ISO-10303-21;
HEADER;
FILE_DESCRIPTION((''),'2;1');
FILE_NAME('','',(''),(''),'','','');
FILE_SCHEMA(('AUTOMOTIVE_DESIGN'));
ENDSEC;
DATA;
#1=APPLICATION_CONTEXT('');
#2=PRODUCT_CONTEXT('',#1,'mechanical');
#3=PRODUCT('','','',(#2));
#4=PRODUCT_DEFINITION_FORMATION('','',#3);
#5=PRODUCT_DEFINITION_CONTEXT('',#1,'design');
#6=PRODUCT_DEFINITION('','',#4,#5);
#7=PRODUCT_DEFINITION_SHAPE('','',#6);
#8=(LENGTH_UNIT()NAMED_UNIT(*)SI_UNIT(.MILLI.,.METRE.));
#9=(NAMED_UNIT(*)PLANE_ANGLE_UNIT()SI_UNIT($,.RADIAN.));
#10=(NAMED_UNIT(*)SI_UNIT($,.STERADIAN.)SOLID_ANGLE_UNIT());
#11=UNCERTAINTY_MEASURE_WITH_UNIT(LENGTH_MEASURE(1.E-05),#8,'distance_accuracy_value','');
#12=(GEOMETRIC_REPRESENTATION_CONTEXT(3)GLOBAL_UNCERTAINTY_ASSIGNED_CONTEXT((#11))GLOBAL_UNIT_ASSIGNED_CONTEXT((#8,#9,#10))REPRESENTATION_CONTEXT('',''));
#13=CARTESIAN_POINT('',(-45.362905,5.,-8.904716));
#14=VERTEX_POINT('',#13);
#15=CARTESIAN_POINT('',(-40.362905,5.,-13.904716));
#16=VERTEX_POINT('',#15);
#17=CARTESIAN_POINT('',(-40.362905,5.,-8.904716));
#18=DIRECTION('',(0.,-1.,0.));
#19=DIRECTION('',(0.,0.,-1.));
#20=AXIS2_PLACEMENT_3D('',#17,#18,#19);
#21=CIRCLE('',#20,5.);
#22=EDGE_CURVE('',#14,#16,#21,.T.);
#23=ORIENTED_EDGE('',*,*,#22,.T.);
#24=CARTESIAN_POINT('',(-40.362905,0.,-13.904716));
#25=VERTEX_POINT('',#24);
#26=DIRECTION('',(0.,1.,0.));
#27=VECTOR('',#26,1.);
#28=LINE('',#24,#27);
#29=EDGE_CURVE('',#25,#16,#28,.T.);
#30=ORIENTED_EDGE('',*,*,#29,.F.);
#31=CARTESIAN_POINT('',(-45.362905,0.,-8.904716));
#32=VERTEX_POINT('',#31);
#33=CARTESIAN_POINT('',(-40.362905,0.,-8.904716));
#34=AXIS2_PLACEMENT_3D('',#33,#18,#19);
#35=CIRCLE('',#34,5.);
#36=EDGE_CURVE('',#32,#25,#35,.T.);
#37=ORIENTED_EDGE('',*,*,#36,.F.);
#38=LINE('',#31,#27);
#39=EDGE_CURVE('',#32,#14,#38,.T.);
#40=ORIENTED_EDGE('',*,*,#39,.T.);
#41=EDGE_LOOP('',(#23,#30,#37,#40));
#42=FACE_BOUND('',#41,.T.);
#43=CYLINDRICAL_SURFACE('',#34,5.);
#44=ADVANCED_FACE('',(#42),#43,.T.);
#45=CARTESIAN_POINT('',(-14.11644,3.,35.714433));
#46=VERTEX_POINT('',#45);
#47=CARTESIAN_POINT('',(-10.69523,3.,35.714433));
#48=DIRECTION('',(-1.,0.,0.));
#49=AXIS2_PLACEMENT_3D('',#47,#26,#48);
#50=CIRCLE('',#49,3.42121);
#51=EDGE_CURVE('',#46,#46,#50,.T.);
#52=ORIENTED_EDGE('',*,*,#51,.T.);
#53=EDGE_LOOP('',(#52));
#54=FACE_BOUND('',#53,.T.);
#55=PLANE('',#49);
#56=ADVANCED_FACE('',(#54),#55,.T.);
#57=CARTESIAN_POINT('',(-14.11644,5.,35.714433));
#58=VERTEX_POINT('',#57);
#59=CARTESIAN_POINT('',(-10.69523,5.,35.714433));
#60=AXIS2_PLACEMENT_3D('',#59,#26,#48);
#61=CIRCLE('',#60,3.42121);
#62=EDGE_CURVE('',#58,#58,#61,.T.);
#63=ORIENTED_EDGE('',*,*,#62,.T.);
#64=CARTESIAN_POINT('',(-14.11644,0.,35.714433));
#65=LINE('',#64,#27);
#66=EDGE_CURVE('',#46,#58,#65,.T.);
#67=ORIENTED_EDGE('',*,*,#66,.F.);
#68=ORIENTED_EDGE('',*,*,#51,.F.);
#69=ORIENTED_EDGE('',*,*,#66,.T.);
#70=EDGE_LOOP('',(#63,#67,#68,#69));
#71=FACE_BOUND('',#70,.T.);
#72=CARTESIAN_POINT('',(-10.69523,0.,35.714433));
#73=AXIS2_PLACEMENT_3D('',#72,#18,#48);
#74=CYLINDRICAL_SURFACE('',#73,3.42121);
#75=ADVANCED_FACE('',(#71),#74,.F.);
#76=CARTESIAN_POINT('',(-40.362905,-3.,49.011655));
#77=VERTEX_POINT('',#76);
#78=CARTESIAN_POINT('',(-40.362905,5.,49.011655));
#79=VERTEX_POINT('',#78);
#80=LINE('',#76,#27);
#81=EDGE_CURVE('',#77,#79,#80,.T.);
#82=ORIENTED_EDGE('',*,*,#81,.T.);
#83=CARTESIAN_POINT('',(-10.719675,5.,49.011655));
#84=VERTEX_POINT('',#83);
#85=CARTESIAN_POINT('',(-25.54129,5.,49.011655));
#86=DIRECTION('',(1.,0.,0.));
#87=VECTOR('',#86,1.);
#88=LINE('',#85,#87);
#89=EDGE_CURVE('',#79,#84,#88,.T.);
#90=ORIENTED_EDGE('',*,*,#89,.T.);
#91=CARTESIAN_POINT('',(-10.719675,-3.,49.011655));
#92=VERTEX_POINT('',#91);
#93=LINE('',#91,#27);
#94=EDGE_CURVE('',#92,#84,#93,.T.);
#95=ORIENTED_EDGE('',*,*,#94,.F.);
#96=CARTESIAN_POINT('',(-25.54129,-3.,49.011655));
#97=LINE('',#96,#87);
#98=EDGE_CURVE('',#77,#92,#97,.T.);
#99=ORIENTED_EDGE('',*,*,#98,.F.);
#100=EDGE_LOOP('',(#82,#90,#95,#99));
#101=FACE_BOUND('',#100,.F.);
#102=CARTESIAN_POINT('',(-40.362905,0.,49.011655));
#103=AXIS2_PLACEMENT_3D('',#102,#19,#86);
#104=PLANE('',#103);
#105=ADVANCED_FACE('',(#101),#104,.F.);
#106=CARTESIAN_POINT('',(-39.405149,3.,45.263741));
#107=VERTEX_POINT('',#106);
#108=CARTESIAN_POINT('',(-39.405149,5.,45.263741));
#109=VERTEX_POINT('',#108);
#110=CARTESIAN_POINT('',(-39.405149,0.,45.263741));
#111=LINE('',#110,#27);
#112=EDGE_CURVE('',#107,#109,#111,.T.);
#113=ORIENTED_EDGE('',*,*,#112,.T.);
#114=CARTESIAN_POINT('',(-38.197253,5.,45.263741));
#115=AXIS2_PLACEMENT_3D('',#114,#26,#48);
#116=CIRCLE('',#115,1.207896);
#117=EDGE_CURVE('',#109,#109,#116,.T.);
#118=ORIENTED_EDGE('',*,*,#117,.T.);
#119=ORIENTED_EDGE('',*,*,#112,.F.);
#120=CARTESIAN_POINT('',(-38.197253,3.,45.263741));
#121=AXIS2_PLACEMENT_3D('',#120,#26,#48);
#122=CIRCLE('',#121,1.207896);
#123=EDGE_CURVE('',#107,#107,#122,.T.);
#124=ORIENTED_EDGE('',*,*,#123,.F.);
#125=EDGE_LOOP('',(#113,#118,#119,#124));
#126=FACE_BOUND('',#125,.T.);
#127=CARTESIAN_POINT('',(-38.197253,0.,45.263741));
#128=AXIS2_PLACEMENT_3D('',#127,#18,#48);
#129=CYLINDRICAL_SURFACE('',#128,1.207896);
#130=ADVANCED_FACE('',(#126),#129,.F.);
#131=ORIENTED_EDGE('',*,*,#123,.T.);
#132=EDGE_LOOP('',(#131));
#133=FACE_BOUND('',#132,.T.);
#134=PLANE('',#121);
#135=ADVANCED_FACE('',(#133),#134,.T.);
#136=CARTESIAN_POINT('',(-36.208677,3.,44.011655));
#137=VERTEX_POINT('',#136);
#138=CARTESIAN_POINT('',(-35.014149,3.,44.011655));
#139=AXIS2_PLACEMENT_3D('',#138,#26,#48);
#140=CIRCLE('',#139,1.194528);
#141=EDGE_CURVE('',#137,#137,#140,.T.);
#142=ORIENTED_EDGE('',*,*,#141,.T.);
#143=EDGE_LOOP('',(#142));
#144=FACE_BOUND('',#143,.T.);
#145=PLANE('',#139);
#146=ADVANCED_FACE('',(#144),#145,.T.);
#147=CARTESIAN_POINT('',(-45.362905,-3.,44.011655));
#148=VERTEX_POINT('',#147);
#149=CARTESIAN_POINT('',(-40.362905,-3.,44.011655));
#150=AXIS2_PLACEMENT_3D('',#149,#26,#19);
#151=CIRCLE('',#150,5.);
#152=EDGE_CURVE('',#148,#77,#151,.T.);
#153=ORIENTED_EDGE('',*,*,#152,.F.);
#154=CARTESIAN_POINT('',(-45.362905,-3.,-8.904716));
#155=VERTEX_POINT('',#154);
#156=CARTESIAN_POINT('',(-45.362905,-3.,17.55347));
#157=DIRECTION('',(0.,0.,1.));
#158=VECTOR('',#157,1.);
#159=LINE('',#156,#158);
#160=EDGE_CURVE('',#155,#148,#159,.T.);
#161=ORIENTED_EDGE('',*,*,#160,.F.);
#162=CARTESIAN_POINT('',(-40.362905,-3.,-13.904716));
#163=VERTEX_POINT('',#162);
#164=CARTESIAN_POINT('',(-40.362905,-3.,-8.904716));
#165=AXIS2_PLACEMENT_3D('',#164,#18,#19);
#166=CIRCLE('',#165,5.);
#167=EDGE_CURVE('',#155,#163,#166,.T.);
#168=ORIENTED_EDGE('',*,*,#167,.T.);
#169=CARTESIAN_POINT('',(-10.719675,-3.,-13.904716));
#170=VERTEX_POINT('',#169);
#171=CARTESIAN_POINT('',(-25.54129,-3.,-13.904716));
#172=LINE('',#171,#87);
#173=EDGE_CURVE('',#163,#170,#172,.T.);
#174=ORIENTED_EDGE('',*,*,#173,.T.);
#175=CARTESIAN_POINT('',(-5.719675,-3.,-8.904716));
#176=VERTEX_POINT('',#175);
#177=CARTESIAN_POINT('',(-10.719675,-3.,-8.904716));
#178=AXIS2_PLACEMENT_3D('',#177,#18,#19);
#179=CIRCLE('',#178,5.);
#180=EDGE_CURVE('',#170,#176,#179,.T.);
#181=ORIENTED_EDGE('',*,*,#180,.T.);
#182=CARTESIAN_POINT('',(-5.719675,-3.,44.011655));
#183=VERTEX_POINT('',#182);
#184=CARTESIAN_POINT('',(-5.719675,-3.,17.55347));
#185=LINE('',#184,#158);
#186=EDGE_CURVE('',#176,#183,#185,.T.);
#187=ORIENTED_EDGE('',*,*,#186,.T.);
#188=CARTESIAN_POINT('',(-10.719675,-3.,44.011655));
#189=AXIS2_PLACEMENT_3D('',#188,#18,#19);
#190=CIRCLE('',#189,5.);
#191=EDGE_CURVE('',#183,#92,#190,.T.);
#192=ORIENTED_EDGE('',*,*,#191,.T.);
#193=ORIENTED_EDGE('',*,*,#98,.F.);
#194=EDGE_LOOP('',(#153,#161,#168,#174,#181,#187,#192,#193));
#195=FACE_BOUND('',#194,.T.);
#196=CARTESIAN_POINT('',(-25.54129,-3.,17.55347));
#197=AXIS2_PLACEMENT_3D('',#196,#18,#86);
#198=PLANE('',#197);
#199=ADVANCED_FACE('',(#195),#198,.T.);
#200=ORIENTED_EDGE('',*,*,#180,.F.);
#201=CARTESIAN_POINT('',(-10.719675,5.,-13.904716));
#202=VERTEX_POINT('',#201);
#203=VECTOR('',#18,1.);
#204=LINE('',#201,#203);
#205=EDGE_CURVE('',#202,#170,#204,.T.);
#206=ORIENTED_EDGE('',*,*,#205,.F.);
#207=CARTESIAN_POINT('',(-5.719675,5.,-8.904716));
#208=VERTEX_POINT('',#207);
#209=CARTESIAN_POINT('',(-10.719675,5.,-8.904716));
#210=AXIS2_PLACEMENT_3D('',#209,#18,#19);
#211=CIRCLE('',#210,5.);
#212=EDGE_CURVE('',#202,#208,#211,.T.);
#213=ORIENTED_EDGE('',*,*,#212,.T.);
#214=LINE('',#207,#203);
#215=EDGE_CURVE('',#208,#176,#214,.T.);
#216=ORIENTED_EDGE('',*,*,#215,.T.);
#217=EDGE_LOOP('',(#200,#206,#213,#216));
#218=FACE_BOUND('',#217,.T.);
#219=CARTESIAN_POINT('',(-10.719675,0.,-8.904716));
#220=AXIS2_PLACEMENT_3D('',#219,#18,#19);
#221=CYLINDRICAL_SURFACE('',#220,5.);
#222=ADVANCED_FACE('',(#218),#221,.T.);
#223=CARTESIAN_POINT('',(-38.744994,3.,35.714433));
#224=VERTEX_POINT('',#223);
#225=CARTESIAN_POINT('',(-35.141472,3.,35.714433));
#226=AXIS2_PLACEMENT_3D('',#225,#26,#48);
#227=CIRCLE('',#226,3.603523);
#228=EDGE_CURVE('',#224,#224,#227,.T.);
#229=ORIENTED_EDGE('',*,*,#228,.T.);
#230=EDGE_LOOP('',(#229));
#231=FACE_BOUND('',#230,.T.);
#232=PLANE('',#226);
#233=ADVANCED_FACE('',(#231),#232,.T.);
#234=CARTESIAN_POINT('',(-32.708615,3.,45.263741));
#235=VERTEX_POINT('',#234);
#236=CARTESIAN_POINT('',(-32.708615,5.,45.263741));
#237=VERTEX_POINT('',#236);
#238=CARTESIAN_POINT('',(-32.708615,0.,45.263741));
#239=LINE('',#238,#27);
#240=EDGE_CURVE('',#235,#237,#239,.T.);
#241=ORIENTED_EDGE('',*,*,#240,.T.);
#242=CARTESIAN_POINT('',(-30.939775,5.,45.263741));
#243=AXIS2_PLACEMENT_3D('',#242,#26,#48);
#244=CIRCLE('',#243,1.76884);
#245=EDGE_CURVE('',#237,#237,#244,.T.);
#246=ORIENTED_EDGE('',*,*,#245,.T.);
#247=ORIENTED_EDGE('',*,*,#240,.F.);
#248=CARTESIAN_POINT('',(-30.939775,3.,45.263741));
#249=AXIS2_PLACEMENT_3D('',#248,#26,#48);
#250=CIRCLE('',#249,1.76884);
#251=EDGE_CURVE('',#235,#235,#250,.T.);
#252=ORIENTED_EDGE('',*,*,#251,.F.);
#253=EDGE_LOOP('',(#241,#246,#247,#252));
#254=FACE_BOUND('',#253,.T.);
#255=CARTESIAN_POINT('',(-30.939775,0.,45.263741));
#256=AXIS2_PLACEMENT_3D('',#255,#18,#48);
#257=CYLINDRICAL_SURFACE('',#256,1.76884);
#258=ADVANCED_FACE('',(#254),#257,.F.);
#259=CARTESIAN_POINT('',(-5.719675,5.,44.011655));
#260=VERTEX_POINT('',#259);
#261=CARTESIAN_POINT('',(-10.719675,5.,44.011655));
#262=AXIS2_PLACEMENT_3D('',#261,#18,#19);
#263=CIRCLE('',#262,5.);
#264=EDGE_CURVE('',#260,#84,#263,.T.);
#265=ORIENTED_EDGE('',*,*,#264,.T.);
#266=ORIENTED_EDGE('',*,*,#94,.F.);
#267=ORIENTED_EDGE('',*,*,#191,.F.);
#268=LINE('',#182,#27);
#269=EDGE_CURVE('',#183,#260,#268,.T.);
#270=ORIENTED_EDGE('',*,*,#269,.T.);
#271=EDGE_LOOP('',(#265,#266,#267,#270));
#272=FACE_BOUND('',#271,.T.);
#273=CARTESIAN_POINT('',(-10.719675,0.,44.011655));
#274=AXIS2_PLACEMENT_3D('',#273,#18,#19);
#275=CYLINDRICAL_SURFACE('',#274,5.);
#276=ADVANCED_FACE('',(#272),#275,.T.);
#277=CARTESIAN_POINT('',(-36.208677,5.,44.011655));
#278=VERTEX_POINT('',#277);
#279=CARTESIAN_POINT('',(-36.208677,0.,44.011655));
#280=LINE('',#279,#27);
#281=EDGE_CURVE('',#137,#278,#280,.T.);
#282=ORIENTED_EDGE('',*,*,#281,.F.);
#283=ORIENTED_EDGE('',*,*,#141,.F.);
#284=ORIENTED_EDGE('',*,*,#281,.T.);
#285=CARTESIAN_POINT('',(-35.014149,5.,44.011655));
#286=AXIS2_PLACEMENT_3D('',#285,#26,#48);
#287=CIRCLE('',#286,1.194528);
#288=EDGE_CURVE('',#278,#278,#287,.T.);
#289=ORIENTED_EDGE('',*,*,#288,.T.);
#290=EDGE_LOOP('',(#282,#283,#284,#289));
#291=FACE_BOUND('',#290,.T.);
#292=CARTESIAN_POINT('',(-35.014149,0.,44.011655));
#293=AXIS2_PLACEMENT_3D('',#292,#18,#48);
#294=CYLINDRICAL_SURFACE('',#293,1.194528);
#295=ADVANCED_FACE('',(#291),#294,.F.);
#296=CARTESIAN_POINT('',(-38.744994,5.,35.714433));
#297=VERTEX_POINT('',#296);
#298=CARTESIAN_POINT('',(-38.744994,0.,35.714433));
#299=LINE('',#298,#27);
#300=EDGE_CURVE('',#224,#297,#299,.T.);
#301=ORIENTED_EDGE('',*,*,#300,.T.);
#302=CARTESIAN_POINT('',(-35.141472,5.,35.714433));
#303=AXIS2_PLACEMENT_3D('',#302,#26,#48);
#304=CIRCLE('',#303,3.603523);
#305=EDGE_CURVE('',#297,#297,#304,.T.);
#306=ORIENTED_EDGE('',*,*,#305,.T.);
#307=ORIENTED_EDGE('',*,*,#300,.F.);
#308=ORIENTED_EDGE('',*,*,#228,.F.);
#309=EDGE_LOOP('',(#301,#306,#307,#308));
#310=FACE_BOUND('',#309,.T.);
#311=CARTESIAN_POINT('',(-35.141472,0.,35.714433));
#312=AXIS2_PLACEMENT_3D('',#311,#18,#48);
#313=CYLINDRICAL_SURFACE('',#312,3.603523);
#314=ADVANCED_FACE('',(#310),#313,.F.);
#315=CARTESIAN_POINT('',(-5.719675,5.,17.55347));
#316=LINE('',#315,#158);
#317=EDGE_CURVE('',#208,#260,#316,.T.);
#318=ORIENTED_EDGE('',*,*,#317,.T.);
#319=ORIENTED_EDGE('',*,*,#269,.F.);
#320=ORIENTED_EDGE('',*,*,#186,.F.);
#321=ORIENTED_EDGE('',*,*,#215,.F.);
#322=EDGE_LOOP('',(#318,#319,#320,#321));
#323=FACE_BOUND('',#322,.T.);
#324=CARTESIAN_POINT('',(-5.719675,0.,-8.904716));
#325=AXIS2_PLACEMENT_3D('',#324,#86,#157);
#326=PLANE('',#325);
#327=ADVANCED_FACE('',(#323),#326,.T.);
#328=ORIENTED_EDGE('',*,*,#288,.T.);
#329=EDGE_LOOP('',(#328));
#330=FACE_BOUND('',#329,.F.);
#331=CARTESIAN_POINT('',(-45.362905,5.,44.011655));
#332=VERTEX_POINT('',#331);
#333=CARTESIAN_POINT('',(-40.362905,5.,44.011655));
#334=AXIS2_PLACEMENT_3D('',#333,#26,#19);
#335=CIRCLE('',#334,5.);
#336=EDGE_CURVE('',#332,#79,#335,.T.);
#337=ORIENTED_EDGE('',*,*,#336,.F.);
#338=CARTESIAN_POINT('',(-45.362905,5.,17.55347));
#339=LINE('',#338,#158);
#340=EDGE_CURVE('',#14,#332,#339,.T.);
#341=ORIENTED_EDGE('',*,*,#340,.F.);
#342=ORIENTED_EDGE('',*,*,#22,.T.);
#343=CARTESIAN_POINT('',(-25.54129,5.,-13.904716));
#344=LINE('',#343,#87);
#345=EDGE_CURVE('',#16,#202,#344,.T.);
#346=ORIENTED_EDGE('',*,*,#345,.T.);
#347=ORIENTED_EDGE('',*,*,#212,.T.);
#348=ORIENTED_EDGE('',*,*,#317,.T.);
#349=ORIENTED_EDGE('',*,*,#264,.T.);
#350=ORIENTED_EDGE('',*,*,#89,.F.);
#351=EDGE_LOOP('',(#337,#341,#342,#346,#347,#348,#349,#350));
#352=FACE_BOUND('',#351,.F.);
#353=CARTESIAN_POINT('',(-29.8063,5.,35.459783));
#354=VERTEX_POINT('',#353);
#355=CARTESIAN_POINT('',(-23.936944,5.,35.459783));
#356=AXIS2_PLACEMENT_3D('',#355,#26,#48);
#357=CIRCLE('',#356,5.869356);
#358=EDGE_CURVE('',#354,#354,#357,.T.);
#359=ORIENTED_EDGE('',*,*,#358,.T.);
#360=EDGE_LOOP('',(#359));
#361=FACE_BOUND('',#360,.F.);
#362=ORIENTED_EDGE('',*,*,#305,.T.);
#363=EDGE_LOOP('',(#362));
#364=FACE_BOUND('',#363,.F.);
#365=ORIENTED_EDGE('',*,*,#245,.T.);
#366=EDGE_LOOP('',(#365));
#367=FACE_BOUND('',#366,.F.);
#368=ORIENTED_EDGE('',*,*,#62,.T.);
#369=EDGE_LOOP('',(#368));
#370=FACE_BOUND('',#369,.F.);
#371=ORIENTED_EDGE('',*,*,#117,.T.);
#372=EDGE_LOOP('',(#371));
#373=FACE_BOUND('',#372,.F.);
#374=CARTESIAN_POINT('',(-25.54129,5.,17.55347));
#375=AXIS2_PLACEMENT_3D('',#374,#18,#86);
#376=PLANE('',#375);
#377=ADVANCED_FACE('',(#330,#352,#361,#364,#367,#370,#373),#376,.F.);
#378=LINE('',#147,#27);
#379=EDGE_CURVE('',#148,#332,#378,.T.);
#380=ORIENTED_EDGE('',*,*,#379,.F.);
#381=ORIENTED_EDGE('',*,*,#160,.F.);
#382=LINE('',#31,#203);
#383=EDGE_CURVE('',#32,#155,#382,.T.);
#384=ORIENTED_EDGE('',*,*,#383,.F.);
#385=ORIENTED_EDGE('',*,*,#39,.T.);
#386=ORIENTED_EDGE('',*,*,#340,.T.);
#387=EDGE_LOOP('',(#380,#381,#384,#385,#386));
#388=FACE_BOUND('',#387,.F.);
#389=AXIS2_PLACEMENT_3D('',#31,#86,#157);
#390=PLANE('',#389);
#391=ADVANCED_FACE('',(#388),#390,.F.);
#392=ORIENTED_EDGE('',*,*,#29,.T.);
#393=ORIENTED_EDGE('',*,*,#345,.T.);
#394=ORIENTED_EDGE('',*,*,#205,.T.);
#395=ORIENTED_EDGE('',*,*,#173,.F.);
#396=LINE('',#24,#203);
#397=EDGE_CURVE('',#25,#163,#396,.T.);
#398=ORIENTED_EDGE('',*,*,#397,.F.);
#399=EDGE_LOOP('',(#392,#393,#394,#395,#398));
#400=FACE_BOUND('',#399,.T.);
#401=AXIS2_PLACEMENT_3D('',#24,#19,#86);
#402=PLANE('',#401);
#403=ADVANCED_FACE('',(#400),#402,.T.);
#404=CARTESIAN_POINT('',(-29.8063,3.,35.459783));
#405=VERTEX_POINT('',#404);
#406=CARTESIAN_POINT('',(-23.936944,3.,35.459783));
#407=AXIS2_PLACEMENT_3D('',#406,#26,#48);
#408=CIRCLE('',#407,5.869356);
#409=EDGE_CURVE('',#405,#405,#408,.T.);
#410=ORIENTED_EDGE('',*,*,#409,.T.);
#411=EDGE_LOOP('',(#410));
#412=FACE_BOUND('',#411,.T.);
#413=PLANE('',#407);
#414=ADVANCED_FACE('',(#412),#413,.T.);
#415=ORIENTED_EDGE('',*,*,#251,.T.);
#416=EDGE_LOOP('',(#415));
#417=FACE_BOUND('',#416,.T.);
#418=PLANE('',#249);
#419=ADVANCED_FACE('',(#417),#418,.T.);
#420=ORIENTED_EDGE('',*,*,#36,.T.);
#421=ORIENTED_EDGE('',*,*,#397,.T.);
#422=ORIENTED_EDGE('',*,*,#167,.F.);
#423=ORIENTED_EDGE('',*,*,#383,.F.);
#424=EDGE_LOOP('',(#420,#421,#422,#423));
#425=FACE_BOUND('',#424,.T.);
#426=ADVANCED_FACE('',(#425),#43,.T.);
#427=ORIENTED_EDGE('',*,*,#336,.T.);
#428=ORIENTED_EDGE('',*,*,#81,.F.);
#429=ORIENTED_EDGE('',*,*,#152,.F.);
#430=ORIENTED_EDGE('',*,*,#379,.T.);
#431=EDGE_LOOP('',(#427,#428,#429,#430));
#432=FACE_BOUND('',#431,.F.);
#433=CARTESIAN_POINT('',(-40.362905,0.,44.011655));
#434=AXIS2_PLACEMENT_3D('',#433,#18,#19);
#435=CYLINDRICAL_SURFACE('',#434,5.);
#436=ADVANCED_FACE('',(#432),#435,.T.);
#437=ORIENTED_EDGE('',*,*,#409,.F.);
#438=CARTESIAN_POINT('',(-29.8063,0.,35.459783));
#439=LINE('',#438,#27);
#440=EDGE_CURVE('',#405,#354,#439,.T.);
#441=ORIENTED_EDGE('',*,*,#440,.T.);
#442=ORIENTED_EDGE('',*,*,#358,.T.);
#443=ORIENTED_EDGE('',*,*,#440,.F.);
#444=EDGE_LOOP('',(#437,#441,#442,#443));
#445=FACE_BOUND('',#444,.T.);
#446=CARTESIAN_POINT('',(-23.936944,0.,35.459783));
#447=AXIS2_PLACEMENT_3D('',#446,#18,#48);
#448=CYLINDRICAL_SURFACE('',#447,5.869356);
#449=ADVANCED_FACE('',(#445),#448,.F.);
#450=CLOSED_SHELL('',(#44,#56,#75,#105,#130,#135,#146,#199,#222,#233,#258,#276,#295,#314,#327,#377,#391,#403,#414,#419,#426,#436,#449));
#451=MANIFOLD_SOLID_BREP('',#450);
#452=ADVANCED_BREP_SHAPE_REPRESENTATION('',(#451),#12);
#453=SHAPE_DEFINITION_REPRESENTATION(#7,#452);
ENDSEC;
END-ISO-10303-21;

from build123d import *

# Parameters (mm, degrees)
F0_W     = 39.643229451
F0_H     = 62.91637104
F1_DEPTH = 3
F2_R     = 5
F3_R     = 1.2078964804
F3_R_2   = 1.1945278086
F3_R_3   = 1.7688403941
F3_R_4   = 5.8693557263
F3_R_5   = 3.6035226858
F3_R_6   = 3.4212098418
F5_DEPTH = 3
F6_DEPTH = 5


# Not quite as in the source:
# - the program builds the solid bodies; features that only make, move or delete a surface that nothing else refers to are left out


with BuildPart() as f1:
    # F0 (on Front) → F1 (new body)
    with BuildSketch(Plane.XZ):
        with Locations((-25.5412899423, 17.5534696318)):
            Rectangle(F0_W, F0_H)
    extrude(amount=F1_DEPTH)

    # F2
    f2_edges = [f1.edges().sort_by_distance(p)[0] for p in [
        (-45.362905, -1.5, 49.011655),
        (-45.362905, -1.5, -13.904716),
        (-5.719675, -1.5, -13.904716),
        (-5.719675, -1.5, 49.011655),
    ]]
    fillet(f2_edges, radius=F2_R)

    # F3 (on face) → F5 (join)
    with BuildSketch(Plane(origin=(0, 0, 0), x_dir=(-1, 0, 0), z_dir=(0, 1, 0))):
        with Locations((38.1972528994, 45.2637411654)):
            Circle(F3_R)
        with Locations((35.0141488016, 44.0116551518)):
            Circle(F3_R_2)
        with Locations((30.9397745878, 45.2637411654)):
            Circle(F3_R_3)
        with Locations((23.9369440824, 35.4597829282)):
            Circle(F3_R_4)
        with Locations((35.1414717734, 35.7144325972)):
            Circle(F3_R_5)
        with Locations((10.6952302158, 35.7144325972)):
            Circle(F3_R_6)
    extrude(amount=F5_DEPTH)

    # F6 (add): a face of the model
    f6_faces = [f1.faces().sort_by_distance(p)[0] for p in [
        (-25.6181685943, 0, 15.8495495724),
    ]]
    extrude(f6_faces, amount=F6_DEPTH)


solid = f1.part
